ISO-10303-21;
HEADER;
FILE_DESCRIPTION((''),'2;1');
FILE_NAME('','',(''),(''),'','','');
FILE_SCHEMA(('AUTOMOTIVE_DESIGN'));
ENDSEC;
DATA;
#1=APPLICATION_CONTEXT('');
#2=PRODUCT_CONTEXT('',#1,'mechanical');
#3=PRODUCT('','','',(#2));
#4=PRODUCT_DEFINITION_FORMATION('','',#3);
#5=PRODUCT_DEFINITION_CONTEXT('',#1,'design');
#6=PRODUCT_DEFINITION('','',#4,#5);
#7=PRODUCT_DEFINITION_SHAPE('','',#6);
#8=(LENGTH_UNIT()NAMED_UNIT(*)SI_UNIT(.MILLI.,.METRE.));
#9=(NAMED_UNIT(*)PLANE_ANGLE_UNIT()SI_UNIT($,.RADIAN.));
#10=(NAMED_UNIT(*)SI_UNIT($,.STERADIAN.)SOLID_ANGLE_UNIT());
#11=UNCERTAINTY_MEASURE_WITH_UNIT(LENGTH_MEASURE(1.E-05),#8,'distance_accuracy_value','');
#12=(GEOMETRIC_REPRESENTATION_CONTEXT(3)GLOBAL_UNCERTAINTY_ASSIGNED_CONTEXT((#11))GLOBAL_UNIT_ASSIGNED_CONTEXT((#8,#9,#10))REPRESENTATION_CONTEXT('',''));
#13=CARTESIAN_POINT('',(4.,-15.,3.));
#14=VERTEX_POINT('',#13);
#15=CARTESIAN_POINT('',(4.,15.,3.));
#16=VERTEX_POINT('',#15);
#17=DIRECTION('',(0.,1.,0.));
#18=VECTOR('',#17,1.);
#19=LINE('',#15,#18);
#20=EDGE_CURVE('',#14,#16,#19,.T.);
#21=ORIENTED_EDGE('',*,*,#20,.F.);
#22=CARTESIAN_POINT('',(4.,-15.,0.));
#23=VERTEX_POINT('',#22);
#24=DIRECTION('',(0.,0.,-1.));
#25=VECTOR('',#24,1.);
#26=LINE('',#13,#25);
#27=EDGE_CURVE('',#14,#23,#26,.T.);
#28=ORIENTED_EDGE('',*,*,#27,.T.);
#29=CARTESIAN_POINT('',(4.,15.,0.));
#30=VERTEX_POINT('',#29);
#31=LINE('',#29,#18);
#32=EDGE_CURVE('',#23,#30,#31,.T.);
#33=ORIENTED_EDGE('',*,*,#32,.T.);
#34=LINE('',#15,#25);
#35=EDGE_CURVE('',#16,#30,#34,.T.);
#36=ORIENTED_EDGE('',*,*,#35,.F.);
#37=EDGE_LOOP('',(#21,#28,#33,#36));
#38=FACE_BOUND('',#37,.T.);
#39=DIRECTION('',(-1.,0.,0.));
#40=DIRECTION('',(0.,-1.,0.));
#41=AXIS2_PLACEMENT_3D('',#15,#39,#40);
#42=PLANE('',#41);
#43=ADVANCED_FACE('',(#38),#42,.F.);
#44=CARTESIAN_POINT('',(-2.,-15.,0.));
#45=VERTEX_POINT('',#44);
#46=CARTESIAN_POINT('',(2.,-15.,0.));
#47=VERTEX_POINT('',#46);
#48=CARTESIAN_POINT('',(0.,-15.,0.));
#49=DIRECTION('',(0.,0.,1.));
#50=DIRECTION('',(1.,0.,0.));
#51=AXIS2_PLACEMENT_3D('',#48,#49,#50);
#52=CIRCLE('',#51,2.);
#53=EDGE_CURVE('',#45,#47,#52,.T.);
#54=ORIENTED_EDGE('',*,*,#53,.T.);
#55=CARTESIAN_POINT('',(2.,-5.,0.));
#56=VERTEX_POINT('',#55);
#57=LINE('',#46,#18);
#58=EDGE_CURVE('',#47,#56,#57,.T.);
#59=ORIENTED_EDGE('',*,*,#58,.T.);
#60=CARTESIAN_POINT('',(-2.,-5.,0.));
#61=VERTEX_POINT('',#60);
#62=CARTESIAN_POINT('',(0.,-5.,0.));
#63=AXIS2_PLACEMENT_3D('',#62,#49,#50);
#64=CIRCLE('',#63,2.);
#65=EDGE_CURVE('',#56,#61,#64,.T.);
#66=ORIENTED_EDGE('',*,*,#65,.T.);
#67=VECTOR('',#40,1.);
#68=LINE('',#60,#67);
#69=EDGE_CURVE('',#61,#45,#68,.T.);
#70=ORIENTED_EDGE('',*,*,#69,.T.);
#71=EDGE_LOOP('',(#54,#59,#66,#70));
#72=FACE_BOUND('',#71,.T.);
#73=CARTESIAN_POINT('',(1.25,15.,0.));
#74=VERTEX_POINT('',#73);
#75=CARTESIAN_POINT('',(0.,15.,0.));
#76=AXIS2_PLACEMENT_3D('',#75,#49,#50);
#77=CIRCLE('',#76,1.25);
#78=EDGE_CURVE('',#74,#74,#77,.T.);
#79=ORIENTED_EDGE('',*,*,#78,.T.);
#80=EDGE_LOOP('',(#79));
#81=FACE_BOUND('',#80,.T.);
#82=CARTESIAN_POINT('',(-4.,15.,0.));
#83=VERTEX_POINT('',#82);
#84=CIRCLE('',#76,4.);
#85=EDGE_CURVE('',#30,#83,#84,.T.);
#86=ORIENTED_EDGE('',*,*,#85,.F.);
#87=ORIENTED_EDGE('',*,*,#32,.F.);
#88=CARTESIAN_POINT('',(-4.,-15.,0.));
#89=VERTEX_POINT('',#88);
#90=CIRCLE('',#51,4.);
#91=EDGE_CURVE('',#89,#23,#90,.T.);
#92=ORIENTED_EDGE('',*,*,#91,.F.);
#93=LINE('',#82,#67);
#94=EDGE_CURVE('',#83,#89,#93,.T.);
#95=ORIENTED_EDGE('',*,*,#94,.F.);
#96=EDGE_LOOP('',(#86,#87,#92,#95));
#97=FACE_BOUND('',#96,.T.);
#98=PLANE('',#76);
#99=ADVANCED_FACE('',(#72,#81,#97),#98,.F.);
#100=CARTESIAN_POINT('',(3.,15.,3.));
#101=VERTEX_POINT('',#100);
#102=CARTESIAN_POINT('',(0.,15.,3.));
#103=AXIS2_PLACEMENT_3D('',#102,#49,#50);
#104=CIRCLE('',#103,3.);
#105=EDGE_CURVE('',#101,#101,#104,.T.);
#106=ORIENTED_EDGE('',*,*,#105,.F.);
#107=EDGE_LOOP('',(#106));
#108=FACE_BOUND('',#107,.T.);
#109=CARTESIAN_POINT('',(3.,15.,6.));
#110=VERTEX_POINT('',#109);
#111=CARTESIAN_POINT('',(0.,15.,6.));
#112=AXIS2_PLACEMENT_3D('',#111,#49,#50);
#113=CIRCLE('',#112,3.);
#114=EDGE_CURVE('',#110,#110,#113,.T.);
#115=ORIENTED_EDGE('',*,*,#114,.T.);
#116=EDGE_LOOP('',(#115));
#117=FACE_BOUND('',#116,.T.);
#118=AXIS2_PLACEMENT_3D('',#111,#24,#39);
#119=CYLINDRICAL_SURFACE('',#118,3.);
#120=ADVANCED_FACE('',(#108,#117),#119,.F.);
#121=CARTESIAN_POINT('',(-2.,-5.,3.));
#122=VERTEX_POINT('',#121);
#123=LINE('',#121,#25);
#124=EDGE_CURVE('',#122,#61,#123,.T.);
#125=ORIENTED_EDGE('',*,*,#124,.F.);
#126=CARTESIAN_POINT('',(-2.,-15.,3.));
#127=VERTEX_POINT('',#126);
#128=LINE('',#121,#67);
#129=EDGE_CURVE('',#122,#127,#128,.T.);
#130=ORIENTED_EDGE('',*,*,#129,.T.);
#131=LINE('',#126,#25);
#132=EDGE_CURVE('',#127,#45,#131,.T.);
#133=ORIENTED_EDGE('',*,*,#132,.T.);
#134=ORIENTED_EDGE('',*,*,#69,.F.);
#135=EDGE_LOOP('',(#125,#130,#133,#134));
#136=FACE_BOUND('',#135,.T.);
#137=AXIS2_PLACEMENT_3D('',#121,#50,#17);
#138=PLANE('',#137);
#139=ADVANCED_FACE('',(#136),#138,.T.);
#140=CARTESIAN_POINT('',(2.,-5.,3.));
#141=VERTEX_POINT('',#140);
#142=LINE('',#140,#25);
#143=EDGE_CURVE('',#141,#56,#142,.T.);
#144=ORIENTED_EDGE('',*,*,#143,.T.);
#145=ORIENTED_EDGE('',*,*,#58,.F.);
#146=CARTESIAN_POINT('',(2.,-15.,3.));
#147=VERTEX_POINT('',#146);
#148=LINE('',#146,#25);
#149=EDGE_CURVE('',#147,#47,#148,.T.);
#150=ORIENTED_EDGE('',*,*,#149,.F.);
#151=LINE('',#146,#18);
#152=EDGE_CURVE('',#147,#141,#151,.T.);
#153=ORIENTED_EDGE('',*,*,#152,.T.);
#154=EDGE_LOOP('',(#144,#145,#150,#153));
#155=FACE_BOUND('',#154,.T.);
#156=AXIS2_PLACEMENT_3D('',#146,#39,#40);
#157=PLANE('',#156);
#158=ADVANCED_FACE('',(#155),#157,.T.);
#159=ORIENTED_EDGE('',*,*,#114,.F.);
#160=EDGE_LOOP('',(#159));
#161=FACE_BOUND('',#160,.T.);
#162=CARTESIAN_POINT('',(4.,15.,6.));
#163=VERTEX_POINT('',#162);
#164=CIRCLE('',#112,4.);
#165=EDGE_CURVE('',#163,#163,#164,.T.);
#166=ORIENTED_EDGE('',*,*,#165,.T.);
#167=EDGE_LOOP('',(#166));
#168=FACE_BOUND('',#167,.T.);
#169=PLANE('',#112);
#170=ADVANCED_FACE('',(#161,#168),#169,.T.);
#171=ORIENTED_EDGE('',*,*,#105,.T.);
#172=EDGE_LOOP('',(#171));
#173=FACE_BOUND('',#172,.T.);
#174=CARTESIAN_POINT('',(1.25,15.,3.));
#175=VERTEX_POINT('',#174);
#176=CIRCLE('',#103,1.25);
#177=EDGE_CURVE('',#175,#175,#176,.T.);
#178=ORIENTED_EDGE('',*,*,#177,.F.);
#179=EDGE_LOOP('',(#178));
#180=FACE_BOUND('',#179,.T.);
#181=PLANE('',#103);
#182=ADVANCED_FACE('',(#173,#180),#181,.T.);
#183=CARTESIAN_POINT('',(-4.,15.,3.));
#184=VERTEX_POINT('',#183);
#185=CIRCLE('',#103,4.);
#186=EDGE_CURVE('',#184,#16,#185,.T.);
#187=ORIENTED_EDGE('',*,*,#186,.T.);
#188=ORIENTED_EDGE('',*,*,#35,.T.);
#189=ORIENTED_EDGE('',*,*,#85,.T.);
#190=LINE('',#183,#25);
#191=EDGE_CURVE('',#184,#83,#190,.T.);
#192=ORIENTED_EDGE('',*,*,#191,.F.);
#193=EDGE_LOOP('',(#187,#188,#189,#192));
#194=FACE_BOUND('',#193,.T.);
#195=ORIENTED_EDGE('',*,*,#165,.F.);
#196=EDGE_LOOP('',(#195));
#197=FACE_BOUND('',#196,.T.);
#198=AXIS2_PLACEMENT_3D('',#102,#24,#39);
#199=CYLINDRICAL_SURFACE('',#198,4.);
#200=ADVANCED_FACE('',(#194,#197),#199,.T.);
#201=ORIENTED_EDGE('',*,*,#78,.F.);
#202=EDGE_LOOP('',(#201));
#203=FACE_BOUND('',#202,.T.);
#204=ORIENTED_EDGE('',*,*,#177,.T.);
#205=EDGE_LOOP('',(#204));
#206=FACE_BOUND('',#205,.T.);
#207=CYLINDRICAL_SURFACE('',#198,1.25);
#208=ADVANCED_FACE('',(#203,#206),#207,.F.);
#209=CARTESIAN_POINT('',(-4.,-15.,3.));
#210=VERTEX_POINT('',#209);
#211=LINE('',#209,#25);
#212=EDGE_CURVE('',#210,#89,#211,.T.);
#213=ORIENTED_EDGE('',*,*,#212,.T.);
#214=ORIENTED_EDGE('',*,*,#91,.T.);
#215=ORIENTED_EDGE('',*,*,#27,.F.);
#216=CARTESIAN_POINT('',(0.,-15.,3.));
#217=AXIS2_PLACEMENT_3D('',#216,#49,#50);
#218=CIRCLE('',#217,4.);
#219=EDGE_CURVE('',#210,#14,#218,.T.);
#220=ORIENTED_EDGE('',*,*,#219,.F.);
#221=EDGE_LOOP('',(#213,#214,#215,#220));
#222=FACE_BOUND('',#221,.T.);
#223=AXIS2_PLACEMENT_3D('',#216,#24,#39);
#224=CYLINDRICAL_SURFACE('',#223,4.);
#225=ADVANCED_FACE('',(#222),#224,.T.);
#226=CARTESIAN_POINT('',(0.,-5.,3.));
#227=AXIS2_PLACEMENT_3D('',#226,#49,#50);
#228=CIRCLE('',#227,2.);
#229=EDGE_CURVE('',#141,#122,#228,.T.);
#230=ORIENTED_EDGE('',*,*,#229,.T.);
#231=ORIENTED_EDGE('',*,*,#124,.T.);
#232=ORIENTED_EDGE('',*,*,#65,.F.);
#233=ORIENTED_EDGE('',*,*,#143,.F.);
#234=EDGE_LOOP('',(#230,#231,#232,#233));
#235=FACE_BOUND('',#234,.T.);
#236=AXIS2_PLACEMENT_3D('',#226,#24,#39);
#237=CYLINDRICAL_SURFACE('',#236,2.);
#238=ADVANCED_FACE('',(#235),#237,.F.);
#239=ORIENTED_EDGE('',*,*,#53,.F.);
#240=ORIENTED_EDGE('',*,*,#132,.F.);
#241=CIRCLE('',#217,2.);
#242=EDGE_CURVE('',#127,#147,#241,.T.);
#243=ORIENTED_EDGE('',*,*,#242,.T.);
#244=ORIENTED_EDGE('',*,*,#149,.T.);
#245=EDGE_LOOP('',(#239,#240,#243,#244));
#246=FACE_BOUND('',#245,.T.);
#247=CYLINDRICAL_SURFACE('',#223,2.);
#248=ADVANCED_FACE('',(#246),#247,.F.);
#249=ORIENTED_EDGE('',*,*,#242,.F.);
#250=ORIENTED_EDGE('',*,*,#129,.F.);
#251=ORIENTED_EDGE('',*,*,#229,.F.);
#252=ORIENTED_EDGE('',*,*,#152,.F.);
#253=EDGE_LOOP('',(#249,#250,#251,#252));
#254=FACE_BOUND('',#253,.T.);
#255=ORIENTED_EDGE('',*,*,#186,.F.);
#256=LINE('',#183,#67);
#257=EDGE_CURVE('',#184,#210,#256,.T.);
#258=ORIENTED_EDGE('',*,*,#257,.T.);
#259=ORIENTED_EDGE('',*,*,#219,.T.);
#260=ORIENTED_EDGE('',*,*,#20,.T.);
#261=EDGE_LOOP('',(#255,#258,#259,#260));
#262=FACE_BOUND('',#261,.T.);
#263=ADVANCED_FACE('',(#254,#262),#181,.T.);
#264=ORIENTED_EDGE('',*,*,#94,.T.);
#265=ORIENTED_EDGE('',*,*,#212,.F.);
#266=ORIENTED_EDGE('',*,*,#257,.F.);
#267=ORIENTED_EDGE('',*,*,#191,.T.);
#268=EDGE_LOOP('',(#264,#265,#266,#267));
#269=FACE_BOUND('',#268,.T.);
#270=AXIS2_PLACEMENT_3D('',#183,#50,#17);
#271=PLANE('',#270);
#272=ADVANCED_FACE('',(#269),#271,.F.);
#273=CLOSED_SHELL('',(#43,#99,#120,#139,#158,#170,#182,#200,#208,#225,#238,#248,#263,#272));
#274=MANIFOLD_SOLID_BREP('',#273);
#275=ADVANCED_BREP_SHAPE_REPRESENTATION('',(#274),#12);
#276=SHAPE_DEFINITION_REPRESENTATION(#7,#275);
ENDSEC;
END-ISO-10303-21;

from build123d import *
from build123d.topology import SkipClean

# Parameters (mm, degrees)
SKETCH1_R           = 1.25
BOSS_EXTRUDE1_DEPTH = 3
SKETCH2_R           = 4
SKETCH2_R_2         = 3
BOSS_EXTRUDE2_DEPTH = 3


with BuildPart() as part:
    # Sketch1 → Boss-Extrude1 (new body)
    with BuildSketch(Plane.XY):
        with BuildLine():
            Line((4, 15), (4, -15))
            ThreePointArc((4, -15), (0, -19), (-4, -15))
            Line((-4, -15), (-4, 15))
            ThreePointArc((-4, 15), (0, 19), (4, 15))
        make_face()
        with Locations((0, 15)):
            Circle(SKETCH1_R, mode=Mode.SUBTRACT)
        with BuildLine():
            Line((-2, -5), (-2, -15))
            ThreePointArc((-2, -15), (0, -17), (2, -15))
            Line((2, -15), (2, -5))
            ThreePointArc((2, -5), (0, -3), (-2, -5))
        make_face(mode=Mode.SUBTRACT)
    extrude(amount=BOSS_EXTRUDE1_DEPTH)

    # Sketch2 → Boss-Extrude2 (add)
    with SkipClean():  # the faces are left unmerged after this step: merging them gives an invalid solid
        with BuildSketch(Plane.XY.offset(3)):
            with Locations((0, 15)):
                Circle(SKETCH2_R)
            with Locations((0, 15)):
                Circle(SKETCH2_R_2, mode=Mode.SUBTRACT)
        extrude(amount=BOSS_EXTRUDE2_DEPTH)
    add(part.part.scale(1), mode=Mode.REPLACE)  # the faces are merged on a copy


solid = part.part
